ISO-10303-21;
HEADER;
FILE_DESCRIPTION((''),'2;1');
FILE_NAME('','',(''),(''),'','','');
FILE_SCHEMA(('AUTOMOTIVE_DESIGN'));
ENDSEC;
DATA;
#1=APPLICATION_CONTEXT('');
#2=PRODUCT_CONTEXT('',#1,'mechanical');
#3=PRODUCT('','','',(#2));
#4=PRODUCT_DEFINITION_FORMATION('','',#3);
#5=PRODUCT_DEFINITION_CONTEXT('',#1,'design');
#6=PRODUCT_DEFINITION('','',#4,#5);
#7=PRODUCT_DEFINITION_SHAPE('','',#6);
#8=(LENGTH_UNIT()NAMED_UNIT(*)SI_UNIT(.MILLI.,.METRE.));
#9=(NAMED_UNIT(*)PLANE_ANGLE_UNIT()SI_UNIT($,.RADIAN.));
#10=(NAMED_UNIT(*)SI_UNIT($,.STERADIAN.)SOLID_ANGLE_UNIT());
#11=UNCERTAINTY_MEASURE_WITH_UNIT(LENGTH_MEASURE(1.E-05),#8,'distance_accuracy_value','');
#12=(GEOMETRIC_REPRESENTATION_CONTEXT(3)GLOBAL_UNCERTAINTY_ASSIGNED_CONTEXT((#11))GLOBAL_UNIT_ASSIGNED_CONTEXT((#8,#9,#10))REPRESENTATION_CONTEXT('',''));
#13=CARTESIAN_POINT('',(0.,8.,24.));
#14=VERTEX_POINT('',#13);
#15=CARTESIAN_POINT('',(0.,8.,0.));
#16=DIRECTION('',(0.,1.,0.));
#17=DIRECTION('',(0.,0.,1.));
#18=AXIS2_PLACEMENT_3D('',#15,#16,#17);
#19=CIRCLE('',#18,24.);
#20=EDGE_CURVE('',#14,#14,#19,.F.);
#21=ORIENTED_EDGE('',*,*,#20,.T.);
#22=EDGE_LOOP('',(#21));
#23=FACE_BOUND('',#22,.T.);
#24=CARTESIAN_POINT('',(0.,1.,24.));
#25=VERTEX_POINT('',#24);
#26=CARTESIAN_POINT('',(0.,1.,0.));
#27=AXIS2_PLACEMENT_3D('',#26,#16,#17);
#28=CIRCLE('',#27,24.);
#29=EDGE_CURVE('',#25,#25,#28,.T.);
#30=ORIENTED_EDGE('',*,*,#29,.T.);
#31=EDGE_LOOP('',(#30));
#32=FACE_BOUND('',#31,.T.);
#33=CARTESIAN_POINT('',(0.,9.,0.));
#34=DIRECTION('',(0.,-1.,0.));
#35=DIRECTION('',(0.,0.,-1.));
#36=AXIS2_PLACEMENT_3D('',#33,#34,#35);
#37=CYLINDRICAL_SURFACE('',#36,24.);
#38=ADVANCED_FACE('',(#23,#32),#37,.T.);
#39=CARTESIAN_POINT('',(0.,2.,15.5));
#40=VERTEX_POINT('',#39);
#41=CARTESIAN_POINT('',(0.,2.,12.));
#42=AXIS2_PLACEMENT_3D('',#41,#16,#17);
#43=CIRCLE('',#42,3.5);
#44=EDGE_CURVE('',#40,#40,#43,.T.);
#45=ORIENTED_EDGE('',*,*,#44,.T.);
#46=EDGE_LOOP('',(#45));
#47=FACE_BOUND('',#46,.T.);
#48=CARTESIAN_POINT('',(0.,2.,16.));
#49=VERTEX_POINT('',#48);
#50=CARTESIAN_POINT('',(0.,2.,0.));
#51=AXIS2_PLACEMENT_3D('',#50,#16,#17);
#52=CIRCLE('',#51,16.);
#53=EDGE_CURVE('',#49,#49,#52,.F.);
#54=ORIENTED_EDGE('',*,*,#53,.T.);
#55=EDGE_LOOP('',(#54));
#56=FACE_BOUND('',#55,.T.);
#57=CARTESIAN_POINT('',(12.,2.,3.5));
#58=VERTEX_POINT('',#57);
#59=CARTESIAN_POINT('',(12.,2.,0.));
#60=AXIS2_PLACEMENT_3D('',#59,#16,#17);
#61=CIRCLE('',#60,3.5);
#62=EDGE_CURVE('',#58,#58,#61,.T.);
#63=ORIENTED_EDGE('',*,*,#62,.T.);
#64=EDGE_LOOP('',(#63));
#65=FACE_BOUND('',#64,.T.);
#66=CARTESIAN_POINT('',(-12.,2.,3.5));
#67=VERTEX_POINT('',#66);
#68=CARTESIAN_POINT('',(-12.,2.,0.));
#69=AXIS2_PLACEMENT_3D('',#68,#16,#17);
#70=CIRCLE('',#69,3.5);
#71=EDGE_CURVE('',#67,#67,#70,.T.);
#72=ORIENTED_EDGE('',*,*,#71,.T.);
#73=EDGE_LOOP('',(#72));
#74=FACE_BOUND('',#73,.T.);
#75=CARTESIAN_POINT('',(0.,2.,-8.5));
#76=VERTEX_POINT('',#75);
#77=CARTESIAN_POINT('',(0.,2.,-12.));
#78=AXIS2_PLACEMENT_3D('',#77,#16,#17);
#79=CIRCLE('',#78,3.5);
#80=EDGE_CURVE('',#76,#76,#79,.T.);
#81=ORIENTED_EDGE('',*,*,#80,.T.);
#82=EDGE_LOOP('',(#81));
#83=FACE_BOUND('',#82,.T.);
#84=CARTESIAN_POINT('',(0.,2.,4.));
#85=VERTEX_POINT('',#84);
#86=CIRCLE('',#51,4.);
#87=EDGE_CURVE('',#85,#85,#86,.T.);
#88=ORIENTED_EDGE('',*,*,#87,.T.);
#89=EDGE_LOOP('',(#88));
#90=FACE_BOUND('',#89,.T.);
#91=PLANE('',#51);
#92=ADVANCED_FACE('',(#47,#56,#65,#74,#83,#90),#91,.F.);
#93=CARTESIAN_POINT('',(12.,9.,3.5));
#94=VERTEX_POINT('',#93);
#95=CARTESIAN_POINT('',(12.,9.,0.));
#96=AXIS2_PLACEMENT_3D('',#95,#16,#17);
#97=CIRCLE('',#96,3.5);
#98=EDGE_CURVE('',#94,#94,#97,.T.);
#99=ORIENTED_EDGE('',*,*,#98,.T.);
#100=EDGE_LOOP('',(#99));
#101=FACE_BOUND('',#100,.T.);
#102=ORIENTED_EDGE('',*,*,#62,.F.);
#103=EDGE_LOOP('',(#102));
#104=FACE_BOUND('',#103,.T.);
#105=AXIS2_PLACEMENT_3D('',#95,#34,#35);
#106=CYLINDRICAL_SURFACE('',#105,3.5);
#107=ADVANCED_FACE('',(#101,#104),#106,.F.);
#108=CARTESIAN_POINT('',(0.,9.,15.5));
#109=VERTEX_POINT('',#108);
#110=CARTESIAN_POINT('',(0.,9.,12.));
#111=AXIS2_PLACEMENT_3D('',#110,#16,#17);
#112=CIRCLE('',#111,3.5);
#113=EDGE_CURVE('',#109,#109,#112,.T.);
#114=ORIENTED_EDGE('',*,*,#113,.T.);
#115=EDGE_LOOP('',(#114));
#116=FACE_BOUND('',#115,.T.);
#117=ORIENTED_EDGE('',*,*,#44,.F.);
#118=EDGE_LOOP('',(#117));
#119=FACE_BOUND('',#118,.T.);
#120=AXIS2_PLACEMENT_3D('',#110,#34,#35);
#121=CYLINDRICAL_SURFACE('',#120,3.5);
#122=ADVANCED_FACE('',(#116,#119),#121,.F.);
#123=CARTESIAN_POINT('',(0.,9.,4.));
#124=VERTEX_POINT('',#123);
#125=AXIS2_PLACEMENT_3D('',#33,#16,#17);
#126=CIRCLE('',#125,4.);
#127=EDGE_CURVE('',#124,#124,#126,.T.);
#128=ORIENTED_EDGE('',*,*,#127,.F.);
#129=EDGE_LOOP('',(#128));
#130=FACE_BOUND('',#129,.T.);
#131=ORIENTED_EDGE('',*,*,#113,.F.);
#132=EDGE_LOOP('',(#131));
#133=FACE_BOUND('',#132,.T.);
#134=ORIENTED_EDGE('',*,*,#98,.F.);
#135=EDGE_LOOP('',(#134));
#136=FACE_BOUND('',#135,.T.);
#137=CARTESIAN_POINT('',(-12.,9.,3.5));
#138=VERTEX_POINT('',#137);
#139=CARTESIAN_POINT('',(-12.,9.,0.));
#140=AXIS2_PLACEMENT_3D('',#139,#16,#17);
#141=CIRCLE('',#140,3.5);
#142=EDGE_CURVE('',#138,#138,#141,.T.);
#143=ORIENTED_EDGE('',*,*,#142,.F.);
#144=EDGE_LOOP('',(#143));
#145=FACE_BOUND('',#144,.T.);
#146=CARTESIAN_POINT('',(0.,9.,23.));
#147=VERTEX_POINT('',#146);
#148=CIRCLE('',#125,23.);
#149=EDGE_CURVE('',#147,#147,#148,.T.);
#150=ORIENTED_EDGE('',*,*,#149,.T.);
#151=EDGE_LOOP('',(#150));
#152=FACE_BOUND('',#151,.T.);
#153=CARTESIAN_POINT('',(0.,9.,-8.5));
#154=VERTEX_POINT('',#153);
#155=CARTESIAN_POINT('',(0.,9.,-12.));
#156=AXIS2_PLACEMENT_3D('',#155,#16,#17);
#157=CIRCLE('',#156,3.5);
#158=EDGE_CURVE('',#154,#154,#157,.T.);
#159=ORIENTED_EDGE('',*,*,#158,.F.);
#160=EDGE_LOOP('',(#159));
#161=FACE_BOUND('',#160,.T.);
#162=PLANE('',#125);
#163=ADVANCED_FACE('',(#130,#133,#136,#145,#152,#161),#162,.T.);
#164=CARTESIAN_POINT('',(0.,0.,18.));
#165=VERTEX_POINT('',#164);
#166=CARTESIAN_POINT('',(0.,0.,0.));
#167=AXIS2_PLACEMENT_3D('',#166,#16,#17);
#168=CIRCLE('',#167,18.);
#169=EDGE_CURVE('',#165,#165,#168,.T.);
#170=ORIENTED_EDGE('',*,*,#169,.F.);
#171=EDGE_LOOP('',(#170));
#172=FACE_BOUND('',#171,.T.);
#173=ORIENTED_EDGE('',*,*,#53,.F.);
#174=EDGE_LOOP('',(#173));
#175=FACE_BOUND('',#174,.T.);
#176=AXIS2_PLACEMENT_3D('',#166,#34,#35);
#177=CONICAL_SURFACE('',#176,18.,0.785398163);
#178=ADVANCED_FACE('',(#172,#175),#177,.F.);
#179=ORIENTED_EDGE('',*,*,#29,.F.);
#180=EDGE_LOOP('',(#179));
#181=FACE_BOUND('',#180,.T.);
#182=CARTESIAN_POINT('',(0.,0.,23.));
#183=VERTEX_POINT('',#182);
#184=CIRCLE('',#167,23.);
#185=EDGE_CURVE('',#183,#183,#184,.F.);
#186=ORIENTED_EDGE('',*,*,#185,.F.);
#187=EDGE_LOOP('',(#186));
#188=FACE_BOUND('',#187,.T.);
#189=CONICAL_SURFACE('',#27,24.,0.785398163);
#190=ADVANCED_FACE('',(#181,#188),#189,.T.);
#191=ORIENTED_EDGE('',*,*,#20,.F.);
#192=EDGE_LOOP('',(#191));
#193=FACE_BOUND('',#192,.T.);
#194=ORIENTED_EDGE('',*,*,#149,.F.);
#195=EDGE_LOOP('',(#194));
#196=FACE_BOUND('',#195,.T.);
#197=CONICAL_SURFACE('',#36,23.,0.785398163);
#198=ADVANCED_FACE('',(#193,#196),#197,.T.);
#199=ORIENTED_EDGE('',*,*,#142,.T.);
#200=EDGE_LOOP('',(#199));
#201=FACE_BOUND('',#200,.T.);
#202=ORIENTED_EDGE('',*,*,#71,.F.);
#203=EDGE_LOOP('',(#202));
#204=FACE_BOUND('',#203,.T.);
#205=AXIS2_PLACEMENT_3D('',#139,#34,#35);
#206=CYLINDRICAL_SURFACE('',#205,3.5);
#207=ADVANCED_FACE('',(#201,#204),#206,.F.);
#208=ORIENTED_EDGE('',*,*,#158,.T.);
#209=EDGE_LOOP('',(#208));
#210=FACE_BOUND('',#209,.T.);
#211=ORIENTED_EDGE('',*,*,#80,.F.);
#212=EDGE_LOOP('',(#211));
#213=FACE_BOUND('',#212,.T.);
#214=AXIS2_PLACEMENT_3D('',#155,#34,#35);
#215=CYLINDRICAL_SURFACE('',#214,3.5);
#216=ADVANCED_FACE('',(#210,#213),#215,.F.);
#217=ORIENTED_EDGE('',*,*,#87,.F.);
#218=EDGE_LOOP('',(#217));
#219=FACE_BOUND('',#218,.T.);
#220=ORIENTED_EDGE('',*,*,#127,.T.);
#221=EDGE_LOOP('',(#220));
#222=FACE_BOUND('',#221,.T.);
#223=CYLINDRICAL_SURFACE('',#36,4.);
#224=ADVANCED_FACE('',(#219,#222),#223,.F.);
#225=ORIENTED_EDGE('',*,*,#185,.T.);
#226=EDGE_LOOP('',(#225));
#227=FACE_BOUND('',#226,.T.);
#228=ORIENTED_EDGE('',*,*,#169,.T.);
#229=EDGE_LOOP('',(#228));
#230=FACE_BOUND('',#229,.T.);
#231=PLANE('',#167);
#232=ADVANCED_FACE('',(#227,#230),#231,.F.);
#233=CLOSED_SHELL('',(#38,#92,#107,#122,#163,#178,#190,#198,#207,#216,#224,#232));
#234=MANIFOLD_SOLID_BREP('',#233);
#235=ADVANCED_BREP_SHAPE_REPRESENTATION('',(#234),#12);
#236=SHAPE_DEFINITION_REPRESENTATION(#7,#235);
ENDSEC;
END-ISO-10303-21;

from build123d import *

# Parameters (mm, degrees)
SKETCH2_R           = 24
SKETCH2_R_2         = 18
BOSS_EXTRUDE2_DEPTH = 9
BOSS_EXTRUDE3_START = 2
SKETCH2_3_R         = 18
SKETCH2_3_R_2       = 16
SKETCH2_3_R_3       = 3.5
SKETCH2_3_R_4       = 4
BOSS_EXTRUDE3_DEPTH = 7
CHAMFER1_SIZE       = 1
CHAMFER2_SIZE       = 2


with BuildPart() as part:
    # Sketch2 → Boss-Extrude2 (new body)
    with BuildSketch(Plane(origin=(0, 0, 0), x_dir=(1, 0, 0), z_dir=(0, 1, 0))):
        with Locations(Location((0, 0, 0), (0, 0, 270))):
            Circle(SKETCH2_R)
        with Locations(Location((0, 0, 0), (0, 0, 270))):
            Circle(SKETCH2_R_2, mode=Mode.SUBTRACT)
    extrude(amount=BOSS_EXTRUDE2_DEPTH)

    # Sketch2<3> → Boss-Extrude3 (add)
    # profile 1 of 2: a face of its own
    with BuildSketch(Plane(origin=(0, 0, 0), x_dir=(1, 0, 0), z_dir=(0, 1, 0)).offset(BOSS_EXTRUDE3_START)):
        with Locations(Location((0, 0, 0), (0, 0, 270))):
            Circle(SKETCH2_3_R)
        Circle(SKETCH2_3_R_2, mode=Mode.SUBTRACT)
    # profile 2 of 2: a face of its own
    with BuildSketch(Plane(origin=(0, 0, 0), x_dir=(1, 0, 0), z_dir=(0, 1, 0)).offset(BOSS_EXTRUDE3_START)):
        Circle(SKETCH2_3_R_2)
        with Locations(Location((-12, 0, 0), (0, 0, 270))):
            Circle(SKETCH2_3_R_3, mode=Mode.SUBTRACT)
        with Locations(Location((0, -12, 0), (0, 0, 270))):
            Circle(SKETCH2_3_R_3, mode=Mode.SUBTRACT)
        with Locations(Location((12, 0, 0), (0, 0, 270))):
            Circle(SKETCH2_3_R_3, mode=Mode.SUBTRACT)
        with Locations(Location((0, 12, 0), (0, 0, 270))):
            Circle(SKETCH2_3_R_3, mode=Mode.SUBTRACT)
        with Locations(Location((0, 0, 0), (0, 0, 270))):
            Circle(SKETCH2_3_R_4, mode=Mode.SUBTRACT)
    extrude(amount=BOSS_EXTRUDE3_DEPTH)

    # Chamfer1
    chamfer1_edges = [part.edges().sort_by_distance(p)[0] for p in [
        (0, 9, -24),
        (0, 0, -24),
    ]]
    chamfer(chamfer1_edges, length=CHAMFER1_SIZE)

    # Chamfer2
    chamfer2_edges = [part.edges().sort_by_distance(p)[0] for p in [
        (0, 2, -18),
    ]]
    chamfer(chamfer2_edges, length=CHAMFER2_SIZE - 0.0001)  # a hair under: the kernel refuses the full size


solid = part.part
